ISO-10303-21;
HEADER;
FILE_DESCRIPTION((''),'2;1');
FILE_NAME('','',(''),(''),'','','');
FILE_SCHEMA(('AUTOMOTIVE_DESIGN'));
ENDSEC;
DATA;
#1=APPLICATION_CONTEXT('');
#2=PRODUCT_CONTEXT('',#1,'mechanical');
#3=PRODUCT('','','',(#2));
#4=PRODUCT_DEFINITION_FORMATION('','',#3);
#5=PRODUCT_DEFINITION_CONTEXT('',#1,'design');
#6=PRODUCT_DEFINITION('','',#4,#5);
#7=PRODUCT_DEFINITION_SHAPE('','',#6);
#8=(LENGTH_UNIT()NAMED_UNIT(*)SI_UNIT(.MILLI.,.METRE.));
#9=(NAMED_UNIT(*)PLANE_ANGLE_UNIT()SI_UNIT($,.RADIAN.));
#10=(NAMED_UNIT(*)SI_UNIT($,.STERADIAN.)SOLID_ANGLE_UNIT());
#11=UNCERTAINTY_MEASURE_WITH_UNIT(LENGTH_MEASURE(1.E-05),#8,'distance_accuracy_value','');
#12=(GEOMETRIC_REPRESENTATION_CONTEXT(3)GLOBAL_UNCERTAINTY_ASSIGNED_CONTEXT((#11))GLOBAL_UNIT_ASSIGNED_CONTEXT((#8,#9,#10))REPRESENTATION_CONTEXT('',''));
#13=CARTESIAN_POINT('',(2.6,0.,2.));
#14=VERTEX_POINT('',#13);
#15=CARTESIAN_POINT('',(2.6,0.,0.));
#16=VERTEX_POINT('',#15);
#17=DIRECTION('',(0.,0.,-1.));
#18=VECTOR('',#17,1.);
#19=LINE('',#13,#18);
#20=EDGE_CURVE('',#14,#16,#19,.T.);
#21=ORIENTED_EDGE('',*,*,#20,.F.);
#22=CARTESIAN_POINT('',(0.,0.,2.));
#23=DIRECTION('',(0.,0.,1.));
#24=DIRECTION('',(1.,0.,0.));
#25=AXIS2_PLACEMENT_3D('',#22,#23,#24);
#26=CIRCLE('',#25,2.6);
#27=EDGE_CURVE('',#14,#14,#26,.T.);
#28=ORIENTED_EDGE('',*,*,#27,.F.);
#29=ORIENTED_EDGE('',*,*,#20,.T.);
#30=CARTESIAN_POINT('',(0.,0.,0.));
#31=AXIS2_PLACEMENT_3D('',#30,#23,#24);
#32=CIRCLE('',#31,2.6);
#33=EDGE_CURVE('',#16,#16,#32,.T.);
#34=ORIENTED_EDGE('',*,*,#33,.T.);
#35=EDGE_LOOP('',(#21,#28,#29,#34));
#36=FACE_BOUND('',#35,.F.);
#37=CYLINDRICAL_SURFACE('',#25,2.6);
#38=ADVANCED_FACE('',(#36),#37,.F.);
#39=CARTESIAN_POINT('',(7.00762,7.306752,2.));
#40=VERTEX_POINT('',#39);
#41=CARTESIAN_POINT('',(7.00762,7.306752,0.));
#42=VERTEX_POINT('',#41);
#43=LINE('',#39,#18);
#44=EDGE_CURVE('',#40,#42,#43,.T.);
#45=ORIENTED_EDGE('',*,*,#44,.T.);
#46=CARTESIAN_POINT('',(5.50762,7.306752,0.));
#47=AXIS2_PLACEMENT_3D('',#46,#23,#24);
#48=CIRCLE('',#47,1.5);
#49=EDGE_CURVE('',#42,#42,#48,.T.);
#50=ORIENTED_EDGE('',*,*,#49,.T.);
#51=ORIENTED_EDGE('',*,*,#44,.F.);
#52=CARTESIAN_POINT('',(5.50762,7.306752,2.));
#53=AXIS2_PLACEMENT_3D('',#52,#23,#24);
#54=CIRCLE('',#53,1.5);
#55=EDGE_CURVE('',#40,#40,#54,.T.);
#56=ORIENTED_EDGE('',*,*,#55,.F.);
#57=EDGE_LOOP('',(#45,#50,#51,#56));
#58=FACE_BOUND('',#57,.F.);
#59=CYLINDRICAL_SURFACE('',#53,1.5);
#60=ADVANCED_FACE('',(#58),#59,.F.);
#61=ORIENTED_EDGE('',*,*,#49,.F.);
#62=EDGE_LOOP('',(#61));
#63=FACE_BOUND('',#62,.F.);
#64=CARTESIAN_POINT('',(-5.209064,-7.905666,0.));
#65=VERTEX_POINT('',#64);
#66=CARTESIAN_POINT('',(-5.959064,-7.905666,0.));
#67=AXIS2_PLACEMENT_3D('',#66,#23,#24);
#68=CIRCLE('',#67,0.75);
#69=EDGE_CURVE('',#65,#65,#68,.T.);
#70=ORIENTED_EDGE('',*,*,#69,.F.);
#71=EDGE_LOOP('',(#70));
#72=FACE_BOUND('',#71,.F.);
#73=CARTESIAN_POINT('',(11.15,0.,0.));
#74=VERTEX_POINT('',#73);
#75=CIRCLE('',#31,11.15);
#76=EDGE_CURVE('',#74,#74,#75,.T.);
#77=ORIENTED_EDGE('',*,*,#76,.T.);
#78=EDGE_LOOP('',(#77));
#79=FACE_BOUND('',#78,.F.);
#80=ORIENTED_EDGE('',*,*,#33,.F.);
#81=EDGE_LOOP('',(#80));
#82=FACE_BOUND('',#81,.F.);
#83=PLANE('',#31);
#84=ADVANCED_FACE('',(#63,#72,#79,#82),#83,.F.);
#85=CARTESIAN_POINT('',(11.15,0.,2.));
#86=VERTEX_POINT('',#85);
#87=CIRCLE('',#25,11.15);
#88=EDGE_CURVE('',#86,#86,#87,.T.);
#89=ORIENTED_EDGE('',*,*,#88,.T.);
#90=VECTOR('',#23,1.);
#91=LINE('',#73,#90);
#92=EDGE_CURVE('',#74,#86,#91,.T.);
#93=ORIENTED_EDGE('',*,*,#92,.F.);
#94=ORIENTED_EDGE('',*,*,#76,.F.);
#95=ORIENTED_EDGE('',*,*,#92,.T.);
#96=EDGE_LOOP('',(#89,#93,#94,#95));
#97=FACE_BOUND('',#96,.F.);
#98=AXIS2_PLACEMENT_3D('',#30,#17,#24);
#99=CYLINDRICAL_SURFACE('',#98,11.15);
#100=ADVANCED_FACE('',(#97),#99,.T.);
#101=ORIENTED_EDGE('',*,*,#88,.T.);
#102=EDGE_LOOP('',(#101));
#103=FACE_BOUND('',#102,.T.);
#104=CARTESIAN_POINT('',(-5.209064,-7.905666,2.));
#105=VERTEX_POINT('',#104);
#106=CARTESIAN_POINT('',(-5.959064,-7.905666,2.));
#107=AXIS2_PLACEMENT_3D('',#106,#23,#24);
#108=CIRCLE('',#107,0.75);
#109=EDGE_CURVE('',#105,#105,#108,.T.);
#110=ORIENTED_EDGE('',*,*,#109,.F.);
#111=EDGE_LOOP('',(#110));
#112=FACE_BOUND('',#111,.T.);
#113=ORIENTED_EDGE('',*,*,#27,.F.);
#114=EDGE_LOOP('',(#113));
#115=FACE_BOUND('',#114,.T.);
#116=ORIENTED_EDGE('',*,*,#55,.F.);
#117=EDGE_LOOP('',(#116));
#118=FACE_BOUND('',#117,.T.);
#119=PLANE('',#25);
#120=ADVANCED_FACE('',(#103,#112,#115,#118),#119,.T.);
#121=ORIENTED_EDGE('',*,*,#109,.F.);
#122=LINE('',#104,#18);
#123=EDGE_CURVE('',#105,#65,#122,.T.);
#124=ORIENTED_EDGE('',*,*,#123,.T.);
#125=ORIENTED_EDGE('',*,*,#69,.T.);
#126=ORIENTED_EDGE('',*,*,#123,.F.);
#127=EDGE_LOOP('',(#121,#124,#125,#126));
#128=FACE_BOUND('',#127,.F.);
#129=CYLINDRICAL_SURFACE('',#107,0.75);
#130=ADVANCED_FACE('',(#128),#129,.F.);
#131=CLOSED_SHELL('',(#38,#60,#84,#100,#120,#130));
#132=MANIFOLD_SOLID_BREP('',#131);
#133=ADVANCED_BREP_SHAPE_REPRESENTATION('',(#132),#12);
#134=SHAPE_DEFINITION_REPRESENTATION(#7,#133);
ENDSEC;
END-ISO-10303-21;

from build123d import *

# Parameters (mm, degrees)
F0_R     = 11.15
F1_DEPTH = 2
F2_R     = 1.5
F2_R_2   = 0.75
F2_R_3   = 2.6
F3_DEPTH = 25


# Not quite as in the source:
# - a feature names something its author has since deleted; it is built from what else it names


with BuildPart() as f1:
    # F0 (on Top) → F1 (new body)
    with BuildSketch(Plane.XY):
        Circle(F0_R)
    extrude(amount=F1_DEPTH)

    # F2 (on face) → F3 (cut)
    with BuildSketch(Plane.XY.offset(2)):
        with Locations((5.5076198523, 7.3067519161)):
            Circle(F2_R)
        with Locations((-5.9590641024, -7.9056660076)):
            Circle(F2_R_2)
        Circle(F2_R_3)
    extrude(amount=-F3_DEPTH, mode=Mode.SUBTRACT)


solid = f1.part
